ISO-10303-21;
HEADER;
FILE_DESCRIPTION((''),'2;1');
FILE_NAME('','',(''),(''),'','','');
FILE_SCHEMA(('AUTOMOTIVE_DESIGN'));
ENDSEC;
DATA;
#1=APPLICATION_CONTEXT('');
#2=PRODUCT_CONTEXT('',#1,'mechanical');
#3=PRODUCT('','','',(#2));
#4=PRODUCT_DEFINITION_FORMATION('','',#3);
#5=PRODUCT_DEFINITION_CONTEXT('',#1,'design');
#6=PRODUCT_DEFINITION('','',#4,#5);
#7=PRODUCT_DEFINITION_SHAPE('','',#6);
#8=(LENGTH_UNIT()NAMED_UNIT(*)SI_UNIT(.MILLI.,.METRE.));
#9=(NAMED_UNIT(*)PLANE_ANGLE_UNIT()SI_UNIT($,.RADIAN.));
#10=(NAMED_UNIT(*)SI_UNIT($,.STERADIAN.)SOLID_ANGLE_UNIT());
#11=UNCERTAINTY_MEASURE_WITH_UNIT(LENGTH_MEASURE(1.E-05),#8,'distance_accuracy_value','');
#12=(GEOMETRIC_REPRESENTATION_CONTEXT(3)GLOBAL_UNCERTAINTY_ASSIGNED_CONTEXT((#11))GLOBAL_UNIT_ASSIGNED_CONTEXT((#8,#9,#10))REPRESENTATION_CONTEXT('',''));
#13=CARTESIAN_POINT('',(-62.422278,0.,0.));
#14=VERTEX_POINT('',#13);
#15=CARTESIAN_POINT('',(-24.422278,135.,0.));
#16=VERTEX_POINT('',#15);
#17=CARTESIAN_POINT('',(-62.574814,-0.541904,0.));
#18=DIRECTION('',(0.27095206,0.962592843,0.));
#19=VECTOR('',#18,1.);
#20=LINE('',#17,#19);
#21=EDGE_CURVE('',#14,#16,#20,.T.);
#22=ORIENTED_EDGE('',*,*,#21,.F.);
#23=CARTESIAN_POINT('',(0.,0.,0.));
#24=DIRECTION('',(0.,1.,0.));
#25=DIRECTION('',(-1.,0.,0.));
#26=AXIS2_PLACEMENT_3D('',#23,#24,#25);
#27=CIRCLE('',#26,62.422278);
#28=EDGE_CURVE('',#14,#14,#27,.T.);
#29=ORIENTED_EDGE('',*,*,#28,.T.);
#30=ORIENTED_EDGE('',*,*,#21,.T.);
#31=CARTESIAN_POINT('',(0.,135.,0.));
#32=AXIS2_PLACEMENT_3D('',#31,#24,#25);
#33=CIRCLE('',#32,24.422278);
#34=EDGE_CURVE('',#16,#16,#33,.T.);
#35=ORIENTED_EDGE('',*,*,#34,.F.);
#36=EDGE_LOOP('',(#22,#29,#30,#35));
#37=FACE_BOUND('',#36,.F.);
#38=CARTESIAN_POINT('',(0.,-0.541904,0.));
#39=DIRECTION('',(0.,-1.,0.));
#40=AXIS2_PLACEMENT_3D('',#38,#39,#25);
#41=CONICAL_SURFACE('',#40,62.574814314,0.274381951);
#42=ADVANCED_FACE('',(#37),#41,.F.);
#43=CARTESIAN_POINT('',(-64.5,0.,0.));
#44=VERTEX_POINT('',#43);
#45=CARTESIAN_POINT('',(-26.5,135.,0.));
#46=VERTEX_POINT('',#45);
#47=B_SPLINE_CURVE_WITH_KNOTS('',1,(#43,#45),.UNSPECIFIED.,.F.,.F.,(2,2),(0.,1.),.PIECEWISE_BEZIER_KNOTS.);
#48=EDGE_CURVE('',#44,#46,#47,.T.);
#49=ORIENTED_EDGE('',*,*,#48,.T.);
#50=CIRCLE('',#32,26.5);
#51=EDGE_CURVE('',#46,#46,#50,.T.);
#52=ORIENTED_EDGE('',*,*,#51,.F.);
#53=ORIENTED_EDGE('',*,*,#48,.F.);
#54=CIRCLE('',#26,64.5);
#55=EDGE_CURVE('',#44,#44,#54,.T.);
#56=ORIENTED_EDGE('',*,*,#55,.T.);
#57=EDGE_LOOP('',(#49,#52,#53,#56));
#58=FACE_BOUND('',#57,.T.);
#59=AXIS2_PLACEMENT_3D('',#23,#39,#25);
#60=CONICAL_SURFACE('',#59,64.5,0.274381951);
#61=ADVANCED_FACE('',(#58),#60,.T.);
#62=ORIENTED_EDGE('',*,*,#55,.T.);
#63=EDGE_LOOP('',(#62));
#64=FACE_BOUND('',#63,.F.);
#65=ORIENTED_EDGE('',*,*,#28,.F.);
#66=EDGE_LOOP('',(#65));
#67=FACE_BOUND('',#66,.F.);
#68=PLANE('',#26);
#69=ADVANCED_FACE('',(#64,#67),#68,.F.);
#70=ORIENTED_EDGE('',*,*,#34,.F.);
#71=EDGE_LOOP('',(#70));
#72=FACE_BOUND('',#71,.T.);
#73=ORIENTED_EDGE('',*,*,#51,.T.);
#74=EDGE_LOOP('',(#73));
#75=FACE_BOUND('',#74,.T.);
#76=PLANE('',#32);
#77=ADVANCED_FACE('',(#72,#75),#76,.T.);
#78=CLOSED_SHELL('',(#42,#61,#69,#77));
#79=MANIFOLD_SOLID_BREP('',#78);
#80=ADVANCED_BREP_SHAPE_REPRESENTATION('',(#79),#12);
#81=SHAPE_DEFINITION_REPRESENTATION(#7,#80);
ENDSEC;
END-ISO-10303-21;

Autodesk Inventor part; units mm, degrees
ref_plane "YZ Plane" through (0, 0, 0) normal (1, 0, 0) x (0, 1, 0)
ref_plane "XY Plane" through (0, 0, 0) normal (0, 0, 1) x (1, 0, 0)
sketch "Szkic6" plane through (0, 0, 0) normal (0, 1, 0) x (-1, 0, 0)
  circle A0 centre (0, 0) radius 64.5
  dimension "d33" = 129
ref_plane "Płaszczyzna konstrukcyjna1" through (0, 135, 0) normal (0, 1, 0) x (-1, 0, 0)
sketch "Szkic7" plane through (0, 135, 0) normal (0, 1, 0) x (-1, 0, 0)
  circle A0 centre (0, 0) radius 26.5
  dimension "d35" = 53
loft "Wyciągnięcie złożone1" add profiles "Szkic6", "Szkic7"
shell "Skorupa1" thickness 2 removed faces 2 at (-1.8199, 135, -2.5499) at (-10.0865, 0, -16.1433)
equation "\"d33\" = OD1"
equation "\"d35\" = OD2"
equation "\"d52\" = THK"
equation "\"SzerokośćGięciaPodcięcia\" = Grubość"
equation "\"RozmiarPodcięciaNarożnika\" = 4 * Grubość"
equation "\"PromieńPrzejścia\" = PromieńGięcia"
equation "\"Rozmiar_promienia_Jacobiego\" = PromieńGięcia"
equation "\"Wielk_odstępu\" = Grubość"
equation "\"d2\" = PromieńGięcia"
equation "\"d23\" = PromieńGięcia"
equation "\"OD1\" = 129"
equation "\"OD2\" = 53"
equation "\"L\" = 135"
equation "\"THK\" = 2"
equation "\"d34\" = L"
equation "\"Grubość\" = 1.5"
equation "\"PromieńGięcia\" = 3"
properties part number "Redukcja symetryczna Ø129x53x2 L=135" material "304"
